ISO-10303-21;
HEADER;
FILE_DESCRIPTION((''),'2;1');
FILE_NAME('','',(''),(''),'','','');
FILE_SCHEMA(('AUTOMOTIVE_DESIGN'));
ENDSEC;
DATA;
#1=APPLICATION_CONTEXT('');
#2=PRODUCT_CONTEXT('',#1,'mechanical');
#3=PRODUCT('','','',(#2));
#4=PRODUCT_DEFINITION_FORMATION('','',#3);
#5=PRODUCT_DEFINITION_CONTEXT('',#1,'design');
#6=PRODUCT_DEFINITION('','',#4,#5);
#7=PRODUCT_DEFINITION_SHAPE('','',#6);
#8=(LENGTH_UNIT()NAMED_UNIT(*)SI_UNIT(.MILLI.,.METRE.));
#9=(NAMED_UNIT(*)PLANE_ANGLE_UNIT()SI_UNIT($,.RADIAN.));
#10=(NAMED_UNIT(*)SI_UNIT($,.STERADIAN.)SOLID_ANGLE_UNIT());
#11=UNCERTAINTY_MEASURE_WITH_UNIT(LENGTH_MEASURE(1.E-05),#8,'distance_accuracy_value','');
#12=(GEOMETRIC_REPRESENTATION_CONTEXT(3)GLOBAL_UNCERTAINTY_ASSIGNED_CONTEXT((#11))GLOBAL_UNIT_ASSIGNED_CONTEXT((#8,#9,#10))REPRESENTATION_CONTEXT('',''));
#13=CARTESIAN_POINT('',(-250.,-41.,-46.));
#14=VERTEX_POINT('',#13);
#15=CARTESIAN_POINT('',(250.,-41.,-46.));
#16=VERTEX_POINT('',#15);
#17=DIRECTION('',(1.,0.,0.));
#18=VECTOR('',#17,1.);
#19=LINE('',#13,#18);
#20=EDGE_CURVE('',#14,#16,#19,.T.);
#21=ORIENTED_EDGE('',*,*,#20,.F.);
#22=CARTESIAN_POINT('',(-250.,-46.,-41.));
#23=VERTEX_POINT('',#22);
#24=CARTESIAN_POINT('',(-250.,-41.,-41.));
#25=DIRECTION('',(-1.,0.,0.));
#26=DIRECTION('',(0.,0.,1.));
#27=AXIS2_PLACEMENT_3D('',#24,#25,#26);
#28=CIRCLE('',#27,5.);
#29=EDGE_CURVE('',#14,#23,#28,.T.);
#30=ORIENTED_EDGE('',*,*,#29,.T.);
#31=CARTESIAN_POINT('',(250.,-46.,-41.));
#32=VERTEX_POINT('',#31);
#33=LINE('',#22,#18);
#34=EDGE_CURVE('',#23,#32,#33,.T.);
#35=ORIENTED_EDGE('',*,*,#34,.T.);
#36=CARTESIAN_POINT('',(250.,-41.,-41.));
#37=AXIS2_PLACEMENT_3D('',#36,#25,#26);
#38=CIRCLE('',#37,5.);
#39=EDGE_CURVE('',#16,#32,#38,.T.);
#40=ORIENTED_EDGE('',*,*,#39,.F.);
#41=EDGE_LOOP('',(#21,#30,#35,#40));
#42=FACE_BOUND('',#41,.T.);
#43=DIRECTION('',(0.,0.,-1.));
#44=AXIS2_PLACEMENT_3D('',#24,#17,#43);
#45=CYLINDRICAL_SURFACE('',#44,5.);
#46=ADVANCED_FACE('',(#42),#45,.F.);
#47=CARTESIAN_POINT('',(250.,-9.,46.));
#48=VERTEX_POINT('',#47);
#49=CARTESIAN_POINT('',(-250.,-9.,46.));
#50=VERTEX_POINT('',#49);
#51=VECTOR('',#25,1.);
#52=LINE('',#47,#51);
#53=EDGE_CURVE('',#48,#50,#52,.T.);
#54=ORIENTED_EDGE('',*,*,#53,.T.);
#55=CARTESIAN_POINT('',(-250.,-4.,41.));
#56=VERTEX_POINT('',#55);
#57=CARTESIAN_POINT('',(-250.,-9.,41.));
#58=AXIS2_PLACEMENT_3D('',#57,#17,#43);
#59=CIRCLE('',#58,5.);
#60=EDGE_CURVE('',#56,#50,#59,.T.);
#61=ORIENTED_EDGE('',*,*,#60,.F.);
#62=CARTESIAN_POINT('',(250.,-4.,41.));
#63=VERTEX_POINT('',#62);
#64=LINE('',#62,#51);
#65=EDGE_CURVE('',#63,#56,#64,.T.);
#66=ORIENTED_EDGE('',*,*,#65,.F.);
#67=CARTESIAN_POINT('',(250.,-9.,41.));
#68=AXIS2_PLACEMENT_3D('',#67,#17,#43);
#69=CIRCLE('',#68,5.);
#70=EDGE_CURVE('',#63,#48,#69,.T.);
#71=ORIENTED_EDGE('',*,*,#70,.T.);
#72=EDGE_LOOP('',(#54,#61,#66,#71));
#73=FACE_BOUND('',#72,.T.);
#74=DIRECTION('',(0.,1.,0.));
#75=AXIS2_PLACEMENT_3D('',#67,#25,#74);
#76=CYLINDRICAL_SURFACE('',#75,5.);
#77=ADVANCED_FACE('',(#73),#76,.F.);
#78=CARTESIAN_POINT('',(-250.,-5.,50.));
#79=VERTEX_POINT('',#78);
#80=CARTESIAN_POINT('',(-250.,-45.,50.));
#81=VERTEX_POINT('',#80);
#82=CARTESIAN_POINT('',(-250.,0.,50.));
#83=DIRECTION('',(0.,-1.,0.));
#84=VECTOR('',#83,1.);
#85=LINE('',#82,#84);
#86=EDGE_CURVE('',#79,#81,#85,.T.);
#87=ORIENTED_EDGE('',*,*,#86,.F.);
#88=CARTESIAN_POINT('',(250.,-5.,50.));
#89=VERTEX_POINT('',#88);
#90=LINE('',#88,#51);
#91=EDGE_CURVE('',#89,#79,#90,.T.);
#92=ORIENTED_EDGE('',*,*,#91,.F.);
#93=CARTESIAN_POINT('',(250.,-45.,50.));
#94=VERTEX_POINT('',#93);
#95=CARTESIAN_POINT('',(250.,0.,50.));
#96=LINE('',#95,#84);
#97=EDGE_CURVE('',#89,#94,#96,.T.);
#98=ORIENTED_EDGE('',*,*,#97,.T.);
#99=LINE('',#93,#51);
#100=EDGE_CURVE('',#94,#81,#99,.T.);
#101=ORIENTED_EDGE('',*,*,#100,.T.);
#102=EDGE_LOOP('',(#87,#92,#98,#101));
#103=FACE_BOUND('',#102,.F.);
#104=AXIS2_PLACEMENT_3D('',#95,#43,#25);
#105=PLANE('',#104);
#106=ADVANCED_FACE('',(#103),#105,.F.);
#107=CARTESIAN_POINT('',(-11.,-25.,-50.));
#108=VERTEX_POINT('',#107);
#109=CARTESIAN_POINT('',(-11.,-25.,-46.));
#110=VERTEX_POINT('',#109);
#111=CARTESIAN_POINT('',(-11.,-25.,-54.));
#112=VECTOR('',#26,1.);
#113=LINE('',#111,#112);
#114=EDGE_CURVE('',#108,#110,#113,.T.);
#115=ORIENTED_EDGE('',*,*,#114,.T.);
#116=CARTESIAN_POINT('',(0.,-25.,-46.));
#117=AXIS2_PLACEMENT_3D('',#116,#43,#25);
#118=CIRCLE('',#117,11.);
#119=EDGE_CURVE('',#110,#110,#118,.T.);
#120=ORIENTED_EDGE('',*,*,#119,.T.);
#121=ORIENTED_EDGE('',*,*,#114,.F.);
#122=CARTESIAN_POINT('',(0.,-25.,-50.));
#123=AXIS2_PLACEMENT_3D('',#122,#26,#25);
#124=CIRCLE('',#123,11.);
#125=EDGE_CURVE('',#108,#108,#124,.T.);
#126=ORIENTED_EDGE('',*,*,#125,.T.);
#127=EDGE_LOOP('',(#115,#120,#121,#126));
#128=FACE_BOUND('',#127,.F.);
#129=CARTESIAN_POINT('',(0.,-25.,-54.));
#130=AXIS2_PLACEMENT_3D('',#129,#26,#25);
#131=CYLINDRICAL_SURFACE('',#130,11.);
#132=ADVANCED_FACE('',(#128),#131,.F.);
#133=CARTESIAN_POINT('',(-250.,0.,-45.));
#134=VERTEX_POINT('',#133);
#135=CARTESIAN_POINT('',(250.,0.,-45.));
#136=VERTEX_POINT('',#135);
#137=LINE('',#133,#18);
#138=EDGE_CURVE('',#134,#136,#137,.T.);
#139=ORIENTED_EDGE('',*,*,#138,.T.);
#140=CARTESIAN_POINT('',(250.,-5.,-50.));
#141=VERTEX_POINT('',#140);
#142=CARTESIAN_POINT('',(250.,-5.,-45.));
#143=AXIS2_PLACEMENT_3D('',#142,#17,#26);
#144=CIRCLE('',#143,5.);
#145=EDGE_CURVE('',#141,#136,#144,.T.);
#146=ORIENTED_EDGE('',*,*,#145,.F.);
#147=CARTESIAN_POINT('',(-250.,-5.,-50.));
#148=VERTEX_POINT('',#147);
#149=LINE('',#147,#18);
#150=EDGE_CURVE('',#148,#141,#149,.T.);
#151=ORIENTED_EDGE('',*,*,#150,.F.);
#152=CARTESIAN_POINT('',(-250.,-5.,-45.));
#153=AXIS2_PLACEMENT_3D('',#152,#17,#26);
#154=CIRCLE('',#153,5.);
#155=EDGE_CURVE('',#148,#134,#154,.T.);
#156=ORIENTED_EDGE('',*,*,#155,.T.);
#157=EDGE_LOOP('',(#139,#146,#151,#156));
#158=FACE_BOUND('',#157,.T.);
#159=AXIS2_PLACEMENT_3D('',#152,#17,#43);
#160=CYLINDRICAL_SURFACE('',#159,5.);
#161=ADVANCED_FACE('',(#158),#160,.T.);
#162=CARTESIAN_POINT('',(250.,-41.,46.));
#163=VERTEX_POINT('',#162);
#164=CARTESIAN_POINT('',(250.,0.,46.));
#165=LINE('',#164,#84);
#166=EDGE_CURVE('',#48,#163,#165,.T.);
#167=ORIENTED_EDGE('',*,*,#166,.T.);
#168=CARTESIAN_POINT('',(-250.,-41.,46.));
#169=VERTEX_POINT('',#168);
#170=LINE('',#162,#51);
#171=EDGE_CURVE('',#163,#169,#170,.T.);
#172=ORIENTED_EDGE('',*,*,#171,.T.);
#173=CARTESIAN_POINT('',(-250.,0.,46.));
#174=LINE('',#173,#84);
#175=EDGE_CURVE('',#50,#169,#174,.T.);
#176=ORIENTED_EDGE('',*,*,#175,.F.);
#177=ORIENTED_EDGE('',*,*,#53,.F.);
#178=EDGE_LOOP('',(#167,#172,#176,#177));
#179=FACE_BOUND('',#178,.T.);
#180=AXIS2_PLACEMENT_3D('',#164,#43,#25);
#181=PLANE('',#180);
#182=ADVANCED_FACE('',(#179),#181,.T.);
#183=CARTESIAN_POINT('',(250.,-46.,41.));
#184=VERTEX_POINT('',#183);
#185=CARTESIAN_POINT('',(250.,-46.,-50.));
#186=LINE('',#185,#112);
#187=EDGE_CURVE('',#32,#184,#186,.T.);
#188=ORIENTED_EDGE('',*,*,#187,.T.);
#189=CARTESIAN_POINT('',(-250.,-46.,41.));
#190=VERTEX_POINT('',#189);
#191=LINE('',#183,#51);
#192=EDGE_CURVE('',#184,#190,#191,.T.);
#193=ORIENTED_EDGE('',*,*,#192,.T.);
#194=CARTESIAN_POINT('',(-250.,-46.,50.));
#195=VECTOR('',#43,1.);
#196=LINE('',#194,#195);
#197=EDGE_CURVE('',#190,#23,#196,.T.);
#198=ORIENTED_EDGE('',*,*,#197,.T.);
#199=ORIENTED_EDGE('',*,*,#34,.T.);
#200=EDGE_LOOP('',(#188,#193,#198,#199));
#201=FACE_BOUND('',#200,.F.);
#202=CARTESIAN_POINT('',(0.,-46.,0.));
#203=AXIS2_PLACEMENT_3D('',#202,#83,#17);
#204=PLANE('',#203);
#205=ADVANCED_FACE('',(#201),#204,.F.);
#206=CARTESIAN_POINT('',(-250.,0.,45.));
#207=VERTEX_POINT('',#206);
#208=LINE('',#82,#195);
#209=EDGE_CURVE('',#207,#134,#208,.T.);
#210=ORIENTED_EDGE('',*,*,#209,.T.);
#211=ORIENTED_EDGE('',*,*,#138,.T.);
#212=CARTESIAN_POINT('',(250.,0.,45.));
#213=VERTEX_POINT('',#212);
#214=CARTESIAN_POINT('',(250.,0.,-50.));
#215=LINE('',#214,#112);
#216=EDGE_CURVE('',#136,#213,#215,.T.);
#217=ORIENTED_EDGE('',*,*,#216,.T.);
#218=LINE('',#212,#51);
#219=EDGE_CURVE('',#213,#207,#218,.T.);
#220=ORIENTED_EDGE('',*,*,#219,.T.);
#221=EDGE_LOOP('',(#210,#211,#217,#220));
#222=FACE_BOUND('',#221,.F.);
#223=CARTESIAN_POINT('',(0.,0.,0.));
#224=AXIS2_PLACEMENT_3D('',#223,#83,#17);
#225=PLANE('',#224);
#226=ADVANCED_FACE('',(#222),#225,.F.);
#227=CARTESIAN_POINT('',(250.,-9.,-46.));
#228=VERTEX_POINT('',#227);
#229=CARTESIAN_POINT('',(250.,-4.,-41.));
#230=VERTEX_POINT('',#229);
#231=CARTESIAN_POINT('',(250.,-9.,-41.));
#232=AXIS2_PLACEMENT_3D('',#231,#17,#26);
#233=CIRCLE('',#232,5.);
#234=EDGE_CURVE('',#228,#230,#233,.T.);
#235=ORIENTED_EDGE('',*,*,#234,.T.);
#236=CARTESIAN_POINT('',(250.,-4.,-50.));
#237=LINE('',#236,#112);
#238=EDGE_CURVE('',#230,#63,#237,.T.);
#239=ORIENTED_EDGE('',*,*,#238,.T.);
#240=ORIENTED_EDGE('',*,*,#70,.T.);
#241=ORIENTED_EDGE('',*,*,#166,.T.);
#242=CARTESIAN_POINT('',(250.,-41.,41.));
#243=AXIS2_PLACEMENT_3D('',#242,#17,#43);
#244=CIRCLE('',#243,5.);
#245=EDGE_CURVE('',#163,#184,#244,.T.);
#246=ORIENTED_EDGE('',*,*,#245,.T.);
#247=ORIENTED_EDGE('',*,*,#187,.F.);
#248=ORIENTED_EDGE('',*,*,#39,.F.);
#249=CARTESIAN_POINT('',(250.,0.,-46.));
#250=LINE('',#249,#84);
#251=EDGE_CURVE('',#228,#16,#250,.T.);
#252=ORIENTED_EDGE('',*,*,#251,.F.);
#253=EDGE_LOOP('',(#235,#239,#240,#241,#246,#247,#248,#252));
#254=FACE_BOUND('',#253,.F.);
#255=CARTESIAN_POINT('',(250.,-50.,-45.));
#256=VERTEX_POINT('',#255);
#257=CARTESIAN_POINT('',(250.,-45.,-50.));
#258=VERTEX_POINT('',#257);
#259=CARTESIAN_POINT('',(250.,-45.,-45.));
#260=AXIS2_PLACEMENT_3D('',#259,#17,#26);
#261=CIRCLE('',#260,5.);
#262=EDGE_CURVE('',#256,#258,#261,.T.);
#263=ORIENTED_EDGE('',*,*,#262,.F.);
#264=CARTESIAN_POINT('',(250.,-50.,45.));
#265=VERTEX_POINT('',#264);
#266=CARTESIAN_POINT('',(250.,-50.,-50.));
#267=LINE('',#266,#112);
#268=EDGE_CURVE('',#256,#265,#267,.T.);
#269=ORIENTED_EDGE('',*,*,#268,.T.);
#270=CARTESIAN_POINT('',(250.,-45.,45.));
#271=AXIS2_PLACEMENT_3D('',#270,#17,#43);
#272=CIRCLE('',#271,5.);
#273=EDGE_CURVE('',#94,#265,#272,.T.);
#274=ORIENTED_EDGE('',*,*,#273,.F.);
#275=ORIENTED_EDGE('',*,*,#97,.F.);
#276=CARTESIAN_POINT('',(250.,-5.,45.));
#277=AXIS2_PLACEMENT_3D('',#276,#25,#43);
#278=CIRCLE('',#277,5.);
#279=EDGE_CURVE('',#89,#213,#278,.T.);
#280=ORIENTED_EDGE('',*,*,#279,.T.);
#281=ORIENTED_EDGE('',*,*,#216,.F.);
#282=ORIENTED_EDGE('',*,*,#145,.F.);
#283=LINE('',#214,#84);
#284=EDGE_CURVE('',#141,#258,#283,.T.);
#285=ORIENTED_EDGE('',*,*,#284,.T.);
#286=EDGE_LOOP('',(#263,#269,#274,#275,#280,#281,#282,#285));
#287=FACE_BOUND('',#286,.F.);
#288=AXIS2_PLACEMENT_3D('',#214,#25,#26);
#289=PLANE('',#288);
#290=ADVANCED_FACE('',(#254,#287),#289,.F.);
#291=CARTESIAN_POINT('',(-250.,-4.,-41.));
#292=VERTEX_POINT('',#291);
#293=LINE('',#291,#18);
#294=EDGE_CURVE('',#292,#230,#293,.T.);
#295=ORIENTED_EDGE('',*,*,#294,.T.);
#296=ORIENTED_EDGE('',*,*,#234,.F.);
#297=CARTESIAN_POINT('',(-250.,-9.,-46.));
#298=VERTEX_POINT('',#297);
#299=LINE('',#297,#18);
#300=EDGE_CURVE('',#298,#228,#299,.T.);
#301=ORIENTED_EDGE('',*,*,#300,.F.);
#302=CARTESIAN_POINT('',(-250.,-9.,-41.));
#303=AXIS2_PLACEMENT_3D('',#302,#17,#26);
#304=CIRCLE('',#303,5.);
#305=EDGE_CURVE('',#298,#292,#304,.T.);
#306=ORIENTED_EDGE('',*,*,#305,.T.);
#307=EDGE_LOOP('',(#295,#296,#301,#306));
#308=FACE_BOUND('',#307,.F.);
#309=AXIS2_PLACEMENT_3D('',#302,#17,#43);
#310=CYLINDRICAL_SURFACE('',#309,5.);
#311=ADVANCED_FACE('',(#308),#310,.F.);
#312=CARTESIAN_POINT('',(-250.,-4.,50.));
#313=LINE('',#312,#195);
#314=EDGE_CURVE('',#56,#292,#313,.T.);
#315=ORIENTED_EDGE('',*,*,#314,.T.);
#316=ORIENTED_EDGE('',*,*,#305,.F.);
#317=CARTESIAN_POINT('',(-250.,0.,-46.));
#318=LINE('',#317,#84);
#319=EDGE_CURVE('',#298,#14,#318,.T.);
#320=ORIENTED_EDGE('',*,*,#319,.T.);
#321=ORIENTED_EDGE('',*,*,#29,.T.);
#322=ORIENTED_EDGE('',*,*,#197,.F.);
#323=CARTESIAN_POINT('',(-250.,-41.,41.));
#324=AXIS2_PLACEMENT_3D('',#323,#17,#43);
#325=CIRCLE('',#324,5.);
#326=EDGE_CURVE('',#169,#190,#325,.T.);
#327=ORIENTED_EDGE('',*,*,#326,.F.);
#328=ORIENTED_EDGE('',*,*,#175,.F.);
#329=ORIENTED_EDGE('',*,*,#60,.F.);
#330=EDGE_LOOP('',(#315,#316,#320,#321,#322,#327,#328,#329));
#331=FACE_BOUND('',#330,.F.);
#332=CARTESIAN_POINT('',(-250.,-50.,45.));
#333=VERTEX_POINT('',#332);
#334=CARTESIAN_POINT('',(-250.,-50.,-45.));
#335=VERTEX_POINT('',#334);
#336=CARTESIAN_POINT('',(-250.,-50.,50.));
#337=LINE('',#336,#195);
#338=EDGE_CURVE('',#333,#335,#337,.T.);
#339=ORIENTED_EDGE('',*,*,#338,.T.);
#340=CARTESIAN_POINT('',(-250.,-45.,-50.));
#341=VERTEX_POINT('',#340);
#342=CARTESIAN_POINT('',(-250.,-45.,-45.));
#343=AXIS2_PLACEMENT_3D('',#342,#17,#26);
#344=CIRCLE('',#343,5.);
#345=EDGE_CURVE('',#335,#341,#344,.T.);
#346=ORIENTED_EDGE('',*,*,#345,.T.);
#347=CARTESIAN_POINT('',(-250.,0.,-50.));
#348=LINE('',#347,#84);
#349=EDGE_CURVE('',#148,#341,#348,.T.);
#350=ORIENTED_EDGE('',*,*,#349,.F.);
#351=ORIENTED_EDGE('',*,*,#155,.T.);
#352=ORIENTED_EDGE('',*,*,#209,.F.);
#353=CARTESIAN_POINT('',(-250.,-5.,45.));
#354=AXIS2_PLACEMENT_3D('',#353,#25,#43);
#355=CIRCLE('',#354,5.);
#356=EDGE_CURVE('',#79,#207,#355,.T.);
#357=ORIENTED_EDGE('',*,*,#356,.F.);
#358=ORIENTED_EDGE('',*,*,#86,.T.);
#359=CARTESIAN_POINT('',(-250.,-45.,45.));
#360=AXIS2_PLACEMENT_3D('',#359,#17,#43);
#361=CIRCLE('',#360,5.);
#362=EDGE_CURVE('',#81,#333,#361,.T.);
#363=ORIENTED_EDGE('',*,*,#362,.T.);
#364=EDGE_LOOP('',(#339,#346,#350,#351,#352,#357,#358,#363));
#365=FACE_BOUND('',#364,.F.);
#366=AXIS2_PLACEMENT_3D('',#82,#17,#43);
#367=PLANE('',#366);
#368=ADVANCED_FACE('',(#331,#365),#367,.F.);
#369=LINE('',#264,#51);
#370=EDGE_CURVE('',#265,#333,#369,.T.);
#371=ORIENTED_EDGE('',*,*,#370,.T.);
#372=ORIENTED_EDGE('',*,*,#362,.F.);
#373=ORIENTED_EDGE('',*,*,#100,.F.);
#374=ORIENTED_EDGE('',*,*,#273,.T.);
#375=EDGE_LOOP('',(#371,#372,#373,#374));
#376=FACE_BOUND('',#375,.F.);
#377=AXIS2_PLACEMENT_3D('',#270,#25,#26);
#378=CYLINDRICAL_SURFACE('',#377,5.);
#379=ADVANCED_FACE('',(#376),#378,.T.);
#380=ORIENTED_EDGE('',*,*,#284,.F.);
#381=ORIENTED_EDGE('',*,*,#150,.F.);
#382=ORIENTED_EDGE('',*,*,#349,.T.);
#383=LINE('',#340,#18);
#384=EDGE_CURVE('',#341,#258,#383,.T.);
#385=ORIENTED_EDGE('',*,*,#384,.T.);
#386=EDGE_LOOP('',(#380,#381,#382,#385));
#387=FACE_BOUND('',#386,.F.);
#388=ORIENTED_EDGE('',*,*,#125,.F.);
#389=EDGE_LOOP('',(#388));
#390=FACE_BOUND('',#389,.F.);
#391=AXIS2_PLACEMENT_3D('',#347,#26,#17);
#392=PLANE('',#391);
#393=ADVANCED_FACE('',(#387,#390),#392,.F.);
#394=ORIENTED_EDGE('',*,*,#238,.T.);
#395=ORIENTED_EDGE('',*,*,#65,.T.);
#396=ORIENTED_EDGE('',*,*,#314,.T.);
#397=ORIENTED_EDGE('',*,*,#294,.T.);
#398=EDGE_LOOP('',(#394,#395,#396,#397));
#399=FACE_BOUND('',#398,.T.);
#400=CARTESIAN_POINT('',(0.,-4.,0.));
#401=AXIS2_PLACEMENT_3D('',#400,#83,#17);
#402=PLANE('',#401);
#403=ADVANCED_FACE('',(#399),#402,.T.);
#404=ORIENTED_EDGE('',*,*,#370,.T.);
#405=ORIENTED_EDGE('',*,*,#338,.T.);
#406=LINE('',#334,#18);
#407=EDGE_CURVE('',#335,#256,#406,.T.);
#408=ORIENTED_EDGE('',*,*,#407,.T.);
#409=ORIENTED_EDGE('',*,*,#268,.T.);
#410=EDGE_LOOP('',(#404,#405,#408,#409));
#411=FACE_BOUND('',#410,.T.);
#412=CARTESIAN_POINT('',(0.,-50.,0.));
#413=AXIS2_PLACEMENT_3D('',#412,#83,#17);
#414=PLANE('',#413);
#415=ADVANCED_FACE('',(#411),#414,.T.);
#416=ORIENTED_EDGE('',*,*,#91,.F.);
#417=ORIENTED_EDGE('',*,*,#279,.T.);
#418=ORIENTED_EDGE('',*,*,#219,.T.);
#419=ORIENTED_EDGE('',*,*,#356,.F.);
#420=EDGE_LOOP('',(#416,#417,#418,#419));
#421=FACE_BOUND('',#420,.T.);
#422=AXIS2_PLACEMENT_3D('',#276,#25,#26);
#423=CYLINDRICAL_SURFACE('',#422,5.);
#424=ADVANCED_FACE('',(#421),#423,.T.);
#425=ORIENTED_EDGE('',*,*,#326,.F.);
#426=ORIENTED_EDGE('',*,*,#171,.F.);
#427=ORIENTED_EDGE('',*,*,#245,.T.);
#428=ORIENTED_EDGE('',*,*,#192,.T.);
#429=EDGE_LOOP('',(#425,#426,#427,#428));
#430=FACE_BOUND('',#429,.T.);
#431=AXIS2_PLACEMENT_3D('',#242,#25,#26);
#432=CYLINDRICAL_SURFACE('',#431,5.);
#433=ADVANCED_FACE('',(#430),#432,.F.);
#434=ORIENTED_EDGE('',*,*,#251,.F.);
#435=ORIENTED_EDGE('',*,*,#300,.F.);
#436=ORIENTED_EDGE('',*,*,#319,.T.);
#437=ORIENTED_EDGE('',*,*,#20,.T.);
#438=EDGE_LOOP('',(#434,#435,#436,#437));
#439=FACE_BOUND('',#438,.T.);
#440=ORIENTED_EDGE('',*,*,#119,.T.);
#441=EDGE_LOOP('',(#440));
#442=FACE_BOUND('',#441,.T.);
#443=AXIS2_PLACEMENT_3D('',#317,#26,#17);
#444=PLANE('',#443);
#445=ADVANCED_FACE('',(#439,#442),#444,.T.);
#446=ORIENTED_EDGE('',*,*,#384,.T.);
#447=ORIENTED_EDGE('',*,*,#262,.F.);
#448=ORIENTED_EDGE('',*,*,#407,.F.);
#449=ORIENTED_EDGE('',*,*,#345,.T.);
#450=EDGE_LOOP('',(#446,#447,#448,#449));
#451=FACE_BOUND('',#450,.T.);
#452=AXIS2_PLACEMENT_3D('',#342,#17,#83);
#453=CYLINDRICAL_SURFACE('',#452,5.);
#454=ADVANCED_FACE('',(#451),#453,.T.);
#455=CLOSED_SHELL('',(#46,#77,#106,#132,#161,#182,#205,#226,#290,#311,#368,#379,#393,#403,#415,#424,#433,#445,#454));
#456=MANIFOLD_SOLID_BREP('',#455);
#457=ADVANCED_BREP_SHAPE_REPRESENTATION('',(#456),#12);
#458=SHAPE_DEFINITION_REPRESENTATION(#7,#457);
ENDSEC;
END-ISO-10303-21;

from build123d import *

# Parameters (mm, degrees)
F1_DEPTH = 50
F2_T     = -4
F4_D     = 22
F4_DEPTH = 4
F4_TIP   = 6.6094668093
F5_R     = 5


# Not quite as in the source:
# - a feature names something its author has since deleted; it is built from what else it names


with BuildPart() as f1:
    # F0 (on Front) → F1 (new body)
    with BuildSketch(Plane.XZ):
        Polygon((250, 50), (-250, 50), (-250, -50), (-150, -50), (250, -50), align=None)
    extrude(amount=F1_DEPTH)

    # F2
    f2_openings = [f1.faces().sort_by_distance(p)[0] for p in [
        (250, -25, 0),
        (-250, -25, 0),
    ]]
    offset(amount=F2_T, openings=f2_openings)

    # F4
    with Locations(Plane(origin=(0, 0, -50), x_dir=(1, 0, 0), z_dir=(0, 0, -1))):
        with Locations((0, 25)):
            Hole(F4_D / 2, depth=F4_DEPTH)
            with Locations((0, 0, -(F4_DEPTH + F4_TIP / 2))):  # 118° drill point
                Cone(0, F4_D / 2, F4_TIP, mode=Mode.SUBTRACT)

    # F5
    f5_edges = [f1.edges().sort_by_distance(p)[0] for p in [
        (0, -50, 50),
        (0, -50, -50),
        (0, 0, -50),
        (0, 0, 50),
        (0, -4, -46),
        (0, -46, -46),
        (0, -46, 46),
        (0, -4, 46),
    ]]
    fillet(f5_edges, radius=F5_R)


solid = f1.part
